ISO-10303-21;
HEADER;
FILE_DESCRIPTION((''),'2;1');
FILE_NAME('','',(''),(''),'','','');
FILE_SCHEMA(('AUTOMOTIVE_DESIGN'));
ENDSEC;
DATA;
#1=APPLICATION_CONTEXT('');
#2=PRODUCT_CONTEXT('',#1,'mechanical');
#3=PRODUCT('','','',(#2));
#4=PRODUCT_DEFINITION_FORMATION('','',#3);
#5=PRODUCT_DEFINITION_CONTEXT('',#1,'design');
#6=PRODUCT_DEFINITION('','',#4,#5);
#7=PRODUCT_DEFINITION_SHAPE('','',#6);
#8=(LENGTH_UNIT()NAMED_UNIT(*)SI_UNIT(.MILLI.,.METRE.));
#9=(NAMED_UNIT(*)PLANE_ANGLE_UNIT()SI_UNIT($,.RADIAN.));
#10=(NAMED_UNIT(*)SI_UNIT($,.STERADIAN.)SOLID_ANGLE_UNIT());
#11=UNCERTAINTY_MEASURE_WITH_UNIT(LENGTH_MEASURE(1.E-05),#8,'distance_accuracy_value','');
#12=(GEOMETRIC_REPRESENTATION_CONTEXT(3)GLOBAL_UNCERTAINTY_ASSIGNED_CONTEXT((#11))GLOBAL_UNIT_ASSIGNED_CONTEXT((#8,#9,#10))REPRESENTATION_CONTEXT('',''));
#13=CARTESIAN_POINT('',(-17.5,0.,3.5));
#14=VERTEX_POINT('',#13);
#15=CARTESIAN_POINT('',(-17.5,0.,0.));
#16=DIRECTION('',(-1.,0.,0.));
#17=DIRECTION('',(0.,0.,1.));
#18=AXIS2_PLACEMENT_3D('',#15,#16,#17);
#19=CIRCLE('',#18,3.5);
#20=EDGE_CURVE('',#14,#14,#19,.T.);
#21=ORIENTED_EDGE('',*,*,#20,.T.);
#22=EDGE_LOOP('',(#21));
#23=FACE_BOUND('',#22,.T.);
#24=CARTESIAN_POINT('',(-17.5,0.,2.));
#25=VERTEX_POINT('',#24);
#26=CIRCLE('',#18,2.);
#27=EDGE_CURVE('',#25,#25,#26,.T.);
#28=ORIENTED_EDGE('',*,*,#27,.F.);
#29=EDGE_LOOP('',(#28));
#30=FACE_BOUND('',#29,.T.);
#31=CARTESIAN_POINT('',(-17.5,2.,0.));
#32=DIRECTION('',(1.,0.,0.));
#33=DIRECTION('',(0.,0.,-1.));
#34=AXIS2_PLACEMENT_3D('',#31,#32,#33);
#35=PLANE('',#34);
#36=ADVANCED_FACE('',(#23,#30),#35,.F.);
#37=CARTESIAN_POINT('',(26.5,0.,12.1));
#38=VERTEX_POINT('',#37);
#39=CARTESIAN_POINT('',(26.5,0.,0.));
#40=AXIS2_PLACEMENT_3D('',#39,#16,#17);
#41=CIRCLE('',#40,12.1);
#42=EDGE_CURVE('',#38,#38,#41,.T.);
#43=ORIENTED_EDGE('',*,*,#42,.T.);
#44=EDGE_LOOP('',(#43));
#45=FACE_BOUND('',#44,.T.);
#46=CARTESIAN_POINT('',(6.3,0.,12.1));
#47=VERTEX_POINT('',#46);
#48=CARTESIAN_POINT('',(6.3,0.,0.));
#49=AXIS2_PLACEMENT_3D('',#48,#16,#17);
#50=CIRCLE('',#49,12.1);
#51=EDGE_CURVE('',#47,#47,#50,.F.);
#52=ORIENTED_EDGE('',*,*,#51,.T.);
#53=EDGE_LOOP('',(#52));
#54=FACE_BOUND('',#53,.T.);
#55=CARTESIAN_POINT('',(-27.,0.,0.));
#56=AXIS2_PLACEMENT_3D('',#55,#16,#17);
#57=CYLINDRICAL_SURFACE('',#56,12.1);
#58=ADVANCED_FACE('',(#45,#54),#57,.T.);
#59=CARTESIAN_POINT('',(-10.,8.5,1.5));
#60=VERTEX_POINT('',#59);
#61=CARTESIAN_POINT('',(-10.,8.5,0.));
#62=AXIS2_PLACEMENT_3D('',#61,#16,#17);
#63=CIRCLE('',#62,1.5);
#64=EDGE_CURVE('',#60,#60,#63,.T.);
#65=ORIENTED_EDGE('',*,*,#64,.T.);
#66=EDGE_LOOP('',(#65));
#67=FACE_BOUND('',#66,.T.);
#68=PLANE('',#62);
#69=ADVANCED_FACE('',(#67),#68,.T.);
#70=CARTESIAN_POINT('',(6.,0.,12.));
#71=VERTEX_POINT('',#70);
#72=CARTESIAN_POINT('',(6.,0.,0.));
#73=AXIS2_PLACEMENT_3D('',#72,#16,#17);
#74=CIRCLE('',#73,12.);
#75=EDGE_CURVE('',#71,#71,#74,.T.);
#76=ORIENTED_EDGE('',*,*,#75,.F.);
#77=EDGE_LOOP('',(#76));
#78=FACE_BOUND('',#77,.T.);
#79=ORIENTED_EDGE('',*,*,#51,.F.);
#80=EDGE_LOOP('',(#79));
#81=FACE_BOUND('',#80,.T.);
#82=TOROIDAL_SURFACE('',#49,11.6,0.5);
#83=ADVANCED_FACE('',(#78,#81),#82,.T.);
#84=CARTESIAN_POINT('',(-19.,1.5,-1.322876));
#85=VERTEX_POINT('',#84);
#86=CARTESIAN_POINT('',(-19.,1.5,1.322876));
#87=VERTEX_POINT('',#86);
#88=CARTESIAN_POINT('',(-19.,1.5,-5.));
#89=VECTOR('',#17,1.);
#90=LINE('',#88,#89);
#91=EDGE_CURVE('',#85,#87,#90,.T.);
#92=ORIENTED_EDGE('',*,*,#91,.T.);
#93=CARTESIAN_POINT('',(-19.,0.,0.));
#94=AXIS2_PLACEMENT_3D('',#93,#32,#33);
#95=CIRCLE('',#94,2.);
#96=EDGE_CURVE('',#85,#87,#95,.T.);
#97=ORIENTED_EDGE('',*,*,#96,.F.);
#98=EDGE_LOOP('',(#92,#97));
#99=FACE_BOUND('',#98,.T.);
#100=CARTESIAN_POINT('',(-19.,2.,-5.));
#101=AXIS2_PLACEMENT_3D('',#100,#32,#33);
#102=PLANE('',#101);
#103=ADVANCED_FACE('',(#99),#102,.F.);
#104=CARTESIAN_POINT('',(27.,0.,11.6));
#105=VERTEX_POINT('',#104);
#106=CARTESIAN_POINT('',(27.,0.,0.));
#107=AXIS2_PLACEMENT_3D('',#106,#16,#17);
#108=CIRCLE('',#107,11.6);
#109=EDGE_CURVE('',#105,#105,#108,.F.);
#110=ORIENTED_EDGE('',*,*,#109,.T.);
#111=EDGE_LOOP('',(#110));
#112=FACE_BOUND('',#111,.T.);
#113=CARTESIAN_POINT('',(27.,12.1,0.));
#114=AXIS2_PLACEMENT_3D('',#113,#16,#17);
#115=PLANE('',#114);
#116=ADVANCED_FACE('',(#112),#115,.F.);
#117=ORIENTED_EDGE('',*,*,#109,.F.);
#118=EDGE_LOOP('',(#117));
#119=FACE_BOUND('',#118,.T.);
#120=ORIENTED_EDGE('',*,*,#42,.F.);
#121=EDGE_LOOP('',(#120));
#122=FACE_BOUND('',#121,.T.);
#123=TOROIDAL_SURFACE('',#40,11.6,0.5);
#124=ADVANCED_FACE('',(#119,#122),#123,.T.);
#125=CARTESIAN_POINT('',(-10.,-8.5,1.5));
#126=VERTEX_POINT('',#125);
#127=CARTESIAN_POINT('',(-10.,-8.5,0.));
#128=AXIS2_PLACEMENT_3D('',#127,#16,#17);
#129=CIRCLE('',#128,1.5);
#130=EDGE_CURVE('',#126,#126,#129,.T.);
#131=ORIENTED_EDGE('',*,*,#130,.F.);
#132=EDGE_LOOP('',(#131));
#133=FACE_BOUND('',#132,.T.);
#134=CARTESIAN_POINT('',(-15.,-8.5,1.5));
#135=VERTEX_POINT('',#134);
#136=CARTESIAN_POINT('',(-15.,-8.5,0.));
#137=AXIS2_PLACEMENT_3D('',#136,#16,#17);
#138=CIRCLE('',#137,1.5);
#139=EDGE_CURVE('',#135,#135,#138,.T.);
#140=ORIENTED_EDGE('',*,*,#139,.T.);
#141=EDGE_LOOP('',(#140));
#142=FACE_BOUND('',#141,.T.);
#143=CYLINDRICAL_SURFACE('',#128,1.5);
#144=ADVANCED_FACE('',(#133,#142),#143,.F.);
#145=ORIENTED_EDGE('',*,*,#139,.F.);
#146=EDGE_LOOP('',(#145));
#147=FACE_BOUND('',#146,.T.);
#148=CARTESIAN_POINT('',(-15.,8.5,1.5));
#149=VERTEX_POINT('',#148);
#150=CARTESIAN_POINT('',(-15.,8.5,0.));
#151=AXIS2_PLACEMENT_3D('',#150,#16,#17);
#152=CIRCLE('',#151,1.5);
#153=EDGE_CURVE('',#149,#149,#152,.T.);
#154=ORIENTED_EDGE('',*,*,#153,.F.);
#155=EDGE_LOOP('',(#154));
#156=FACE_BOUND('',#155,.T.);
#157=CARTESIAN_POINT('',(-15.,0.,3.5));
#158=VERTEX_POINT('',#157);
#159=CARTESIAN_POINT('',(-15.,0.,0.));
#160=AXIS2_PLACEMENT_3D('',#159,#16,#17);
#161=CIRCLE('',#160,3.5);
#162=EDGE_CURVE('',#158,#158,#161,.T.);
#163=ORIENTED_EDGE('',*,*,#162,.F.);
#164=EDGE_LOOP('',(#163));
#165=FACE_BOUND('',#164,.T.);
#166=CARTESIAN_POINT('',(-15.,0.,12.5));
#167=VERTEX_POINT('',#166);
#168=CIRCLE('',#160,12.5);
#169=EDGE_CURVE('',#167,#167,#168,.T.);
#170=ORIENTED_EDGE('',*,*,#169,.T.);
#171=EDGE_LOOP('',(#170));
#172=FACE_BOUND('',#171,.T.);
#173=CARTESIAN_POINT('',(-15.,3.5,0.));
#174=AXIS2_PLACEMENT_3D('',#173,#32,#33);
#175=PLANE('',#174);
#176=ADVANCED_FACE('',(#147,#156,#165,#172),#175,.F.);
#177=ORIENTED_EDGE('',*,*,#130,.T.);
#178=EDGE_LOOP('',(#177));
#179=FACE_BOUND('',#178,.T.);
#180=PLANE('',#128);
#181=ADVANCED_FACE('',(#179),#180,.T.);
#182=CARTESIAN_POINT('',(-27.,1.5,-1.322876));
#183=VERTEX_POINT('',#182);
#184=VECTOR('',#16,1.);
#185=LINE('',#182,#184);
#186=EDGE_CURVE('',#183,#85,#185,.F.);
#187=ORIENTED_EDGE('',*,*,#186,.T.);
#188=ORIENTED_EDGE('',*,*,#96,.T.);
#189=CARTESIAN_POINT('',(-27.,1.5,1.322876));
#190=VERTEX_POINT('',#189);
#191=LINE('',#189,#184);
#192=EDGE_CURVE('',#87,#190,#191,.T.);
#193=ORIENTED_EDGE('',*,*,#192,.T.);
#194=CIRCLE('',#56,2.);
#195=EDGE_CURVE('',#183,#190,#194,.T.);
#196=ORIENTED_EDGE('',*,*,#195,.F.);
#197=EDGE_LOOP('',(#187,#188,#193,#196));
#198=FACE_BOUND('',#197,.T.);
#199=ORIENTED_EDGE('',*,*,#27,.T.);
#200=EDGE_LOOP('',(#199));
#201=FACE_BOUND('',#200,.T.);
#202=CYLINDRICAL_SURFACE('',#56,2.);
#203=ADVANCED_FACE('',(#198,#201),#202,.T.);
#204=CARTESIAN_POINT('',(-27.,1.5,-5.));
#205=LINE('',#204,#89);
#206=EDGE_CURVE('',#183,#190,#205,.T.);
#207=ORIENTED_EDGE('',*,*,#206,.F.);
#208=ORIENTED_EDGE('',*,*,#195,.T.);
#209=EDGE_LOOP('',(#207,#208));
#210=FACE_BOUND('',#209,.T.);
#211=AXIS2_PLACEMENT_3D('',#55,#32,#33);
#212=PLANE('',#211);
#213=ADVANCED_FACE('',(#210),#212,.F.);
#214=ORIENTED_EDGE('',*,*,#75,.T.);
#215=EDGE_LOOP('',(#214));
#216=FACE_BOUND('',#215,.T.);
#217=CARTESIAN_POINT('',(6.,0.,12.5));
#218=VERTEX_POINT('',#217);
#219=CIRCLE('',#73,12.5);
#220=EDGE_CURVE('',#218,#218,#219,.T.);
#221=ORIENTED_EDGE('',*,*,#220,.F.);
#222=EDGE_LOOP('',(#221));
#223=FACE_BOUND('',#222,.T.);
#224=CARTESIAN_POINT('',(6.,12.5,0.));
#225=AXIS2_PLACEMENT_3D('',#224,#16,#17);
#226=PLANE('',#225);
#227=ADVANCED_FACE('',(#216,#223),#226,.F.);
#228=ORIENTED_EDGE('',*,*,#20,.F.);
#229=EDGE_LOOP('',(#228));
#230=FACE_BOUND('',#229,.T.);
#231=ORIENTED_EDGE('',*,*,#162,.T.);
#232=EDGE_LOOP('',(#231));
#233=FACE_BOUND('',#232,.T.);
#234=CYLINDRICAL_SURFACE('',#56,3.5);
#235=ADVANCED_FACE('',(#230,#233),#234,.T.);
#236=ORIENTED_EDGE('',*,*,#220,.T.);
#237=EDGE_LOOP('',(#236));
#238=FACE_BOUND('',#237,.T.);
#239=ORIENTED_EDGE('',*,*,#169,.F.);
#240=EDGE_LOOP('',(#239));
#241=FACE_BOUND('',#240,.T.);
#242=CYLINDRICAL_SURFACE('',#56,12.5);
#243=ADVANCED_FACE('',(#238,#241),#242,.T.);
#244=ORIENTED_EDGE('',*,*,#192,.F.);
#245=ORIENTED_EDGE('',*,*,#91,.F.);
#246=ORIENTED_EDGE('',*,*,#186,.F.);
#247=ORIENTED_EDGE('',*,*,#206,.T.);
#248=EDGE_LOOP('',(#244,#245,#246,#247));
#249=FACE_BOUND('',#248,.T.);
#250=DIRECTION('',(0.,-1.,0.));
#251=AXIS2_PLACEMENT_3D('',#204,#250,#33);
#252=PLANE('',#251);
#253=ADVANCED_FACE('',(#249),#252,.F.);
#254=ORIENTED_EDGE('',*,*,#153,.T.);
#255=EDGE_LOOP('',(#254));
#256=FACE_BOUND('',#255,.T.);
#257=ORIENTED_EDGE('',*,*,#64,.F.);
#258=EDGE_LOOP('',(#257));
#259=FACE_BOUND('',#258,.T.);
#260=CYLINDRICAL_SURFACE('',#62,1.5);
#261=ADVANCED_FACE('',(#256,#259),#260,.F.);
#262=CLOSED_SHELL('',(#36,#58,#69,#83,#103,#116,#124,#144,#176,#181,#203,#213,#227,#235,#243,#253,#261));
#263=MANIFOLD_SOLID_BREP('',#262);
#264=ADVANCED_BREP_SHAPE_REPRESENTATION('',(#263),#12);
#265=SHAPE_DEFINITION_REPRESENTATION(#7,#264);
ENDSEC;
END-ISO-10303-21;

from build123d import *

# Parameters (mm, degrees)
FILLET1_R          = 0.5
SKETCH2_W          = 8
SKETCH2_H          = 0.5
CUT_EXTRUDE1_DEPTH = 5
SKETCH3_R          = 1.5
CUT_EXTRUDE2_DEPTH = 5


with BuildPart() as part:
    # Sketch1 → Revolve1 (revolve)
    with BuildSketch(Plane.XY, mode=Mode.PRIVATE) as revolve1_sk:
        Polygon((-27, 0), (27, 0), (27, 12.1), (6.1, 12.1), (6, 12), (6, 12.5), (-15, 12.5), (-15, 3.5), (-17.5, 3.5), (-17.5, 2), (-27, 2), align=None)
    revolve(revolve1_sk.sketch.rotate(Axis((-27, 0, 0), (1, 0, 0)), 90), axis=Axis((-27, 0, 0), (1, 0, 0)))

    # Fillet1
    # the kernel refuses this fillet: 0.5 mm, written as the material it takes off along each edge
    with BuildSketch(Plane(origin=(27, 0, 0), x_dir=(0, 0, 1), z_dir=(0, 1, 0))) as fillet1_piece_1:
        with BuildLine():
            CenterArc((12.1 - FILLET1_R, -FILLET1_R), FILLET1_R, 0, 90)
            Line((12.1, -FILLET1_R), (12.1 + FILLET1_R * 0.02, -FILLET1_R))
            Line((12.1 + FILLET1_R * 0.02, -FILLET1_R), (12.1 + FILLET1_R * 0.02, FILLET1_R * 0.02))
            Line((12.1 + FILLET1_R * 0.02, FILLET1_R * 0.02), (12.1 - FILLET1_R, FILLET1_R * 0.02))
            Line((12.1 - FILLET1_R, FILLET1_R * 0.02), (12.1 - FILLET1_R, 0))
        make_face()
    revolve(axis=Axis((27, 0, 0), (1, 0, 0)), mode=Mode.SUBTRACT)
    with BuildSketch(Plane(origin=(6.1, 0, 0), x_dir=(0, 0, 1), z_dir=(0, 1, 0))) as fillet1_piece_2_section:
        with BuildLine():
            CenterArc((11.6, 0.2), FILLET1_R, 323.130102354, 36.869897646)
            Line((12, -0.1), (12.008, -0.106))
            ThreePointArc((12.008, -0.106), (12.057071068, -0.057071068), (12.107071068, -0.007071068))
            Line((12.107071068, -0.007071068), (12.11, 0))
            Line((12.11, 0), (12.11, 0.2))
            Line((12.11, 0.2), (12.1, 0.2))
        make_face()
    fillet1_piece_2 = revolve(axis=Axis((6.1, 0, 0), (1, 0, 0)), mode=Mode.PRIVATE)
    fillet1_piece_2 = split(fillet1_piece_2, bisect_by=Plane(origin=(6, 0, -12.082361586), z_dir=(1, 0, 0)), keep=Keep.TOP, mode=Mode.PRIVATE)
    add(fillet1_piece_2, mode=Mode.SUBTRACT)

    # Sketch2 → Cut-Extrude1 (cut, symmetric)
    with BuildSketch(Plane.XY):
        with Locations((-23, 1.75)):
            Rectangle(SKETCH2_W, SKETCH2_H)
    extrude(amount=CUT_EXTRUDE1_DEPTH, both=True, mode=Mode.SUBTRACT)

    # Sketch3 → Cut-Extrude2 (cut)
    with BuildSketch(Plane.ZY.offset(15)):
        with Locations((0, 8.5)):
            Circle(SKETCH3_R)
        with Locations((0, -8.5)):
            Circle(SKETCH3_R)
    extrude(amount=-CUT_EXTRUDE2_DEPTH, mode=Mode.SUBTRACT)


solid = part.part
